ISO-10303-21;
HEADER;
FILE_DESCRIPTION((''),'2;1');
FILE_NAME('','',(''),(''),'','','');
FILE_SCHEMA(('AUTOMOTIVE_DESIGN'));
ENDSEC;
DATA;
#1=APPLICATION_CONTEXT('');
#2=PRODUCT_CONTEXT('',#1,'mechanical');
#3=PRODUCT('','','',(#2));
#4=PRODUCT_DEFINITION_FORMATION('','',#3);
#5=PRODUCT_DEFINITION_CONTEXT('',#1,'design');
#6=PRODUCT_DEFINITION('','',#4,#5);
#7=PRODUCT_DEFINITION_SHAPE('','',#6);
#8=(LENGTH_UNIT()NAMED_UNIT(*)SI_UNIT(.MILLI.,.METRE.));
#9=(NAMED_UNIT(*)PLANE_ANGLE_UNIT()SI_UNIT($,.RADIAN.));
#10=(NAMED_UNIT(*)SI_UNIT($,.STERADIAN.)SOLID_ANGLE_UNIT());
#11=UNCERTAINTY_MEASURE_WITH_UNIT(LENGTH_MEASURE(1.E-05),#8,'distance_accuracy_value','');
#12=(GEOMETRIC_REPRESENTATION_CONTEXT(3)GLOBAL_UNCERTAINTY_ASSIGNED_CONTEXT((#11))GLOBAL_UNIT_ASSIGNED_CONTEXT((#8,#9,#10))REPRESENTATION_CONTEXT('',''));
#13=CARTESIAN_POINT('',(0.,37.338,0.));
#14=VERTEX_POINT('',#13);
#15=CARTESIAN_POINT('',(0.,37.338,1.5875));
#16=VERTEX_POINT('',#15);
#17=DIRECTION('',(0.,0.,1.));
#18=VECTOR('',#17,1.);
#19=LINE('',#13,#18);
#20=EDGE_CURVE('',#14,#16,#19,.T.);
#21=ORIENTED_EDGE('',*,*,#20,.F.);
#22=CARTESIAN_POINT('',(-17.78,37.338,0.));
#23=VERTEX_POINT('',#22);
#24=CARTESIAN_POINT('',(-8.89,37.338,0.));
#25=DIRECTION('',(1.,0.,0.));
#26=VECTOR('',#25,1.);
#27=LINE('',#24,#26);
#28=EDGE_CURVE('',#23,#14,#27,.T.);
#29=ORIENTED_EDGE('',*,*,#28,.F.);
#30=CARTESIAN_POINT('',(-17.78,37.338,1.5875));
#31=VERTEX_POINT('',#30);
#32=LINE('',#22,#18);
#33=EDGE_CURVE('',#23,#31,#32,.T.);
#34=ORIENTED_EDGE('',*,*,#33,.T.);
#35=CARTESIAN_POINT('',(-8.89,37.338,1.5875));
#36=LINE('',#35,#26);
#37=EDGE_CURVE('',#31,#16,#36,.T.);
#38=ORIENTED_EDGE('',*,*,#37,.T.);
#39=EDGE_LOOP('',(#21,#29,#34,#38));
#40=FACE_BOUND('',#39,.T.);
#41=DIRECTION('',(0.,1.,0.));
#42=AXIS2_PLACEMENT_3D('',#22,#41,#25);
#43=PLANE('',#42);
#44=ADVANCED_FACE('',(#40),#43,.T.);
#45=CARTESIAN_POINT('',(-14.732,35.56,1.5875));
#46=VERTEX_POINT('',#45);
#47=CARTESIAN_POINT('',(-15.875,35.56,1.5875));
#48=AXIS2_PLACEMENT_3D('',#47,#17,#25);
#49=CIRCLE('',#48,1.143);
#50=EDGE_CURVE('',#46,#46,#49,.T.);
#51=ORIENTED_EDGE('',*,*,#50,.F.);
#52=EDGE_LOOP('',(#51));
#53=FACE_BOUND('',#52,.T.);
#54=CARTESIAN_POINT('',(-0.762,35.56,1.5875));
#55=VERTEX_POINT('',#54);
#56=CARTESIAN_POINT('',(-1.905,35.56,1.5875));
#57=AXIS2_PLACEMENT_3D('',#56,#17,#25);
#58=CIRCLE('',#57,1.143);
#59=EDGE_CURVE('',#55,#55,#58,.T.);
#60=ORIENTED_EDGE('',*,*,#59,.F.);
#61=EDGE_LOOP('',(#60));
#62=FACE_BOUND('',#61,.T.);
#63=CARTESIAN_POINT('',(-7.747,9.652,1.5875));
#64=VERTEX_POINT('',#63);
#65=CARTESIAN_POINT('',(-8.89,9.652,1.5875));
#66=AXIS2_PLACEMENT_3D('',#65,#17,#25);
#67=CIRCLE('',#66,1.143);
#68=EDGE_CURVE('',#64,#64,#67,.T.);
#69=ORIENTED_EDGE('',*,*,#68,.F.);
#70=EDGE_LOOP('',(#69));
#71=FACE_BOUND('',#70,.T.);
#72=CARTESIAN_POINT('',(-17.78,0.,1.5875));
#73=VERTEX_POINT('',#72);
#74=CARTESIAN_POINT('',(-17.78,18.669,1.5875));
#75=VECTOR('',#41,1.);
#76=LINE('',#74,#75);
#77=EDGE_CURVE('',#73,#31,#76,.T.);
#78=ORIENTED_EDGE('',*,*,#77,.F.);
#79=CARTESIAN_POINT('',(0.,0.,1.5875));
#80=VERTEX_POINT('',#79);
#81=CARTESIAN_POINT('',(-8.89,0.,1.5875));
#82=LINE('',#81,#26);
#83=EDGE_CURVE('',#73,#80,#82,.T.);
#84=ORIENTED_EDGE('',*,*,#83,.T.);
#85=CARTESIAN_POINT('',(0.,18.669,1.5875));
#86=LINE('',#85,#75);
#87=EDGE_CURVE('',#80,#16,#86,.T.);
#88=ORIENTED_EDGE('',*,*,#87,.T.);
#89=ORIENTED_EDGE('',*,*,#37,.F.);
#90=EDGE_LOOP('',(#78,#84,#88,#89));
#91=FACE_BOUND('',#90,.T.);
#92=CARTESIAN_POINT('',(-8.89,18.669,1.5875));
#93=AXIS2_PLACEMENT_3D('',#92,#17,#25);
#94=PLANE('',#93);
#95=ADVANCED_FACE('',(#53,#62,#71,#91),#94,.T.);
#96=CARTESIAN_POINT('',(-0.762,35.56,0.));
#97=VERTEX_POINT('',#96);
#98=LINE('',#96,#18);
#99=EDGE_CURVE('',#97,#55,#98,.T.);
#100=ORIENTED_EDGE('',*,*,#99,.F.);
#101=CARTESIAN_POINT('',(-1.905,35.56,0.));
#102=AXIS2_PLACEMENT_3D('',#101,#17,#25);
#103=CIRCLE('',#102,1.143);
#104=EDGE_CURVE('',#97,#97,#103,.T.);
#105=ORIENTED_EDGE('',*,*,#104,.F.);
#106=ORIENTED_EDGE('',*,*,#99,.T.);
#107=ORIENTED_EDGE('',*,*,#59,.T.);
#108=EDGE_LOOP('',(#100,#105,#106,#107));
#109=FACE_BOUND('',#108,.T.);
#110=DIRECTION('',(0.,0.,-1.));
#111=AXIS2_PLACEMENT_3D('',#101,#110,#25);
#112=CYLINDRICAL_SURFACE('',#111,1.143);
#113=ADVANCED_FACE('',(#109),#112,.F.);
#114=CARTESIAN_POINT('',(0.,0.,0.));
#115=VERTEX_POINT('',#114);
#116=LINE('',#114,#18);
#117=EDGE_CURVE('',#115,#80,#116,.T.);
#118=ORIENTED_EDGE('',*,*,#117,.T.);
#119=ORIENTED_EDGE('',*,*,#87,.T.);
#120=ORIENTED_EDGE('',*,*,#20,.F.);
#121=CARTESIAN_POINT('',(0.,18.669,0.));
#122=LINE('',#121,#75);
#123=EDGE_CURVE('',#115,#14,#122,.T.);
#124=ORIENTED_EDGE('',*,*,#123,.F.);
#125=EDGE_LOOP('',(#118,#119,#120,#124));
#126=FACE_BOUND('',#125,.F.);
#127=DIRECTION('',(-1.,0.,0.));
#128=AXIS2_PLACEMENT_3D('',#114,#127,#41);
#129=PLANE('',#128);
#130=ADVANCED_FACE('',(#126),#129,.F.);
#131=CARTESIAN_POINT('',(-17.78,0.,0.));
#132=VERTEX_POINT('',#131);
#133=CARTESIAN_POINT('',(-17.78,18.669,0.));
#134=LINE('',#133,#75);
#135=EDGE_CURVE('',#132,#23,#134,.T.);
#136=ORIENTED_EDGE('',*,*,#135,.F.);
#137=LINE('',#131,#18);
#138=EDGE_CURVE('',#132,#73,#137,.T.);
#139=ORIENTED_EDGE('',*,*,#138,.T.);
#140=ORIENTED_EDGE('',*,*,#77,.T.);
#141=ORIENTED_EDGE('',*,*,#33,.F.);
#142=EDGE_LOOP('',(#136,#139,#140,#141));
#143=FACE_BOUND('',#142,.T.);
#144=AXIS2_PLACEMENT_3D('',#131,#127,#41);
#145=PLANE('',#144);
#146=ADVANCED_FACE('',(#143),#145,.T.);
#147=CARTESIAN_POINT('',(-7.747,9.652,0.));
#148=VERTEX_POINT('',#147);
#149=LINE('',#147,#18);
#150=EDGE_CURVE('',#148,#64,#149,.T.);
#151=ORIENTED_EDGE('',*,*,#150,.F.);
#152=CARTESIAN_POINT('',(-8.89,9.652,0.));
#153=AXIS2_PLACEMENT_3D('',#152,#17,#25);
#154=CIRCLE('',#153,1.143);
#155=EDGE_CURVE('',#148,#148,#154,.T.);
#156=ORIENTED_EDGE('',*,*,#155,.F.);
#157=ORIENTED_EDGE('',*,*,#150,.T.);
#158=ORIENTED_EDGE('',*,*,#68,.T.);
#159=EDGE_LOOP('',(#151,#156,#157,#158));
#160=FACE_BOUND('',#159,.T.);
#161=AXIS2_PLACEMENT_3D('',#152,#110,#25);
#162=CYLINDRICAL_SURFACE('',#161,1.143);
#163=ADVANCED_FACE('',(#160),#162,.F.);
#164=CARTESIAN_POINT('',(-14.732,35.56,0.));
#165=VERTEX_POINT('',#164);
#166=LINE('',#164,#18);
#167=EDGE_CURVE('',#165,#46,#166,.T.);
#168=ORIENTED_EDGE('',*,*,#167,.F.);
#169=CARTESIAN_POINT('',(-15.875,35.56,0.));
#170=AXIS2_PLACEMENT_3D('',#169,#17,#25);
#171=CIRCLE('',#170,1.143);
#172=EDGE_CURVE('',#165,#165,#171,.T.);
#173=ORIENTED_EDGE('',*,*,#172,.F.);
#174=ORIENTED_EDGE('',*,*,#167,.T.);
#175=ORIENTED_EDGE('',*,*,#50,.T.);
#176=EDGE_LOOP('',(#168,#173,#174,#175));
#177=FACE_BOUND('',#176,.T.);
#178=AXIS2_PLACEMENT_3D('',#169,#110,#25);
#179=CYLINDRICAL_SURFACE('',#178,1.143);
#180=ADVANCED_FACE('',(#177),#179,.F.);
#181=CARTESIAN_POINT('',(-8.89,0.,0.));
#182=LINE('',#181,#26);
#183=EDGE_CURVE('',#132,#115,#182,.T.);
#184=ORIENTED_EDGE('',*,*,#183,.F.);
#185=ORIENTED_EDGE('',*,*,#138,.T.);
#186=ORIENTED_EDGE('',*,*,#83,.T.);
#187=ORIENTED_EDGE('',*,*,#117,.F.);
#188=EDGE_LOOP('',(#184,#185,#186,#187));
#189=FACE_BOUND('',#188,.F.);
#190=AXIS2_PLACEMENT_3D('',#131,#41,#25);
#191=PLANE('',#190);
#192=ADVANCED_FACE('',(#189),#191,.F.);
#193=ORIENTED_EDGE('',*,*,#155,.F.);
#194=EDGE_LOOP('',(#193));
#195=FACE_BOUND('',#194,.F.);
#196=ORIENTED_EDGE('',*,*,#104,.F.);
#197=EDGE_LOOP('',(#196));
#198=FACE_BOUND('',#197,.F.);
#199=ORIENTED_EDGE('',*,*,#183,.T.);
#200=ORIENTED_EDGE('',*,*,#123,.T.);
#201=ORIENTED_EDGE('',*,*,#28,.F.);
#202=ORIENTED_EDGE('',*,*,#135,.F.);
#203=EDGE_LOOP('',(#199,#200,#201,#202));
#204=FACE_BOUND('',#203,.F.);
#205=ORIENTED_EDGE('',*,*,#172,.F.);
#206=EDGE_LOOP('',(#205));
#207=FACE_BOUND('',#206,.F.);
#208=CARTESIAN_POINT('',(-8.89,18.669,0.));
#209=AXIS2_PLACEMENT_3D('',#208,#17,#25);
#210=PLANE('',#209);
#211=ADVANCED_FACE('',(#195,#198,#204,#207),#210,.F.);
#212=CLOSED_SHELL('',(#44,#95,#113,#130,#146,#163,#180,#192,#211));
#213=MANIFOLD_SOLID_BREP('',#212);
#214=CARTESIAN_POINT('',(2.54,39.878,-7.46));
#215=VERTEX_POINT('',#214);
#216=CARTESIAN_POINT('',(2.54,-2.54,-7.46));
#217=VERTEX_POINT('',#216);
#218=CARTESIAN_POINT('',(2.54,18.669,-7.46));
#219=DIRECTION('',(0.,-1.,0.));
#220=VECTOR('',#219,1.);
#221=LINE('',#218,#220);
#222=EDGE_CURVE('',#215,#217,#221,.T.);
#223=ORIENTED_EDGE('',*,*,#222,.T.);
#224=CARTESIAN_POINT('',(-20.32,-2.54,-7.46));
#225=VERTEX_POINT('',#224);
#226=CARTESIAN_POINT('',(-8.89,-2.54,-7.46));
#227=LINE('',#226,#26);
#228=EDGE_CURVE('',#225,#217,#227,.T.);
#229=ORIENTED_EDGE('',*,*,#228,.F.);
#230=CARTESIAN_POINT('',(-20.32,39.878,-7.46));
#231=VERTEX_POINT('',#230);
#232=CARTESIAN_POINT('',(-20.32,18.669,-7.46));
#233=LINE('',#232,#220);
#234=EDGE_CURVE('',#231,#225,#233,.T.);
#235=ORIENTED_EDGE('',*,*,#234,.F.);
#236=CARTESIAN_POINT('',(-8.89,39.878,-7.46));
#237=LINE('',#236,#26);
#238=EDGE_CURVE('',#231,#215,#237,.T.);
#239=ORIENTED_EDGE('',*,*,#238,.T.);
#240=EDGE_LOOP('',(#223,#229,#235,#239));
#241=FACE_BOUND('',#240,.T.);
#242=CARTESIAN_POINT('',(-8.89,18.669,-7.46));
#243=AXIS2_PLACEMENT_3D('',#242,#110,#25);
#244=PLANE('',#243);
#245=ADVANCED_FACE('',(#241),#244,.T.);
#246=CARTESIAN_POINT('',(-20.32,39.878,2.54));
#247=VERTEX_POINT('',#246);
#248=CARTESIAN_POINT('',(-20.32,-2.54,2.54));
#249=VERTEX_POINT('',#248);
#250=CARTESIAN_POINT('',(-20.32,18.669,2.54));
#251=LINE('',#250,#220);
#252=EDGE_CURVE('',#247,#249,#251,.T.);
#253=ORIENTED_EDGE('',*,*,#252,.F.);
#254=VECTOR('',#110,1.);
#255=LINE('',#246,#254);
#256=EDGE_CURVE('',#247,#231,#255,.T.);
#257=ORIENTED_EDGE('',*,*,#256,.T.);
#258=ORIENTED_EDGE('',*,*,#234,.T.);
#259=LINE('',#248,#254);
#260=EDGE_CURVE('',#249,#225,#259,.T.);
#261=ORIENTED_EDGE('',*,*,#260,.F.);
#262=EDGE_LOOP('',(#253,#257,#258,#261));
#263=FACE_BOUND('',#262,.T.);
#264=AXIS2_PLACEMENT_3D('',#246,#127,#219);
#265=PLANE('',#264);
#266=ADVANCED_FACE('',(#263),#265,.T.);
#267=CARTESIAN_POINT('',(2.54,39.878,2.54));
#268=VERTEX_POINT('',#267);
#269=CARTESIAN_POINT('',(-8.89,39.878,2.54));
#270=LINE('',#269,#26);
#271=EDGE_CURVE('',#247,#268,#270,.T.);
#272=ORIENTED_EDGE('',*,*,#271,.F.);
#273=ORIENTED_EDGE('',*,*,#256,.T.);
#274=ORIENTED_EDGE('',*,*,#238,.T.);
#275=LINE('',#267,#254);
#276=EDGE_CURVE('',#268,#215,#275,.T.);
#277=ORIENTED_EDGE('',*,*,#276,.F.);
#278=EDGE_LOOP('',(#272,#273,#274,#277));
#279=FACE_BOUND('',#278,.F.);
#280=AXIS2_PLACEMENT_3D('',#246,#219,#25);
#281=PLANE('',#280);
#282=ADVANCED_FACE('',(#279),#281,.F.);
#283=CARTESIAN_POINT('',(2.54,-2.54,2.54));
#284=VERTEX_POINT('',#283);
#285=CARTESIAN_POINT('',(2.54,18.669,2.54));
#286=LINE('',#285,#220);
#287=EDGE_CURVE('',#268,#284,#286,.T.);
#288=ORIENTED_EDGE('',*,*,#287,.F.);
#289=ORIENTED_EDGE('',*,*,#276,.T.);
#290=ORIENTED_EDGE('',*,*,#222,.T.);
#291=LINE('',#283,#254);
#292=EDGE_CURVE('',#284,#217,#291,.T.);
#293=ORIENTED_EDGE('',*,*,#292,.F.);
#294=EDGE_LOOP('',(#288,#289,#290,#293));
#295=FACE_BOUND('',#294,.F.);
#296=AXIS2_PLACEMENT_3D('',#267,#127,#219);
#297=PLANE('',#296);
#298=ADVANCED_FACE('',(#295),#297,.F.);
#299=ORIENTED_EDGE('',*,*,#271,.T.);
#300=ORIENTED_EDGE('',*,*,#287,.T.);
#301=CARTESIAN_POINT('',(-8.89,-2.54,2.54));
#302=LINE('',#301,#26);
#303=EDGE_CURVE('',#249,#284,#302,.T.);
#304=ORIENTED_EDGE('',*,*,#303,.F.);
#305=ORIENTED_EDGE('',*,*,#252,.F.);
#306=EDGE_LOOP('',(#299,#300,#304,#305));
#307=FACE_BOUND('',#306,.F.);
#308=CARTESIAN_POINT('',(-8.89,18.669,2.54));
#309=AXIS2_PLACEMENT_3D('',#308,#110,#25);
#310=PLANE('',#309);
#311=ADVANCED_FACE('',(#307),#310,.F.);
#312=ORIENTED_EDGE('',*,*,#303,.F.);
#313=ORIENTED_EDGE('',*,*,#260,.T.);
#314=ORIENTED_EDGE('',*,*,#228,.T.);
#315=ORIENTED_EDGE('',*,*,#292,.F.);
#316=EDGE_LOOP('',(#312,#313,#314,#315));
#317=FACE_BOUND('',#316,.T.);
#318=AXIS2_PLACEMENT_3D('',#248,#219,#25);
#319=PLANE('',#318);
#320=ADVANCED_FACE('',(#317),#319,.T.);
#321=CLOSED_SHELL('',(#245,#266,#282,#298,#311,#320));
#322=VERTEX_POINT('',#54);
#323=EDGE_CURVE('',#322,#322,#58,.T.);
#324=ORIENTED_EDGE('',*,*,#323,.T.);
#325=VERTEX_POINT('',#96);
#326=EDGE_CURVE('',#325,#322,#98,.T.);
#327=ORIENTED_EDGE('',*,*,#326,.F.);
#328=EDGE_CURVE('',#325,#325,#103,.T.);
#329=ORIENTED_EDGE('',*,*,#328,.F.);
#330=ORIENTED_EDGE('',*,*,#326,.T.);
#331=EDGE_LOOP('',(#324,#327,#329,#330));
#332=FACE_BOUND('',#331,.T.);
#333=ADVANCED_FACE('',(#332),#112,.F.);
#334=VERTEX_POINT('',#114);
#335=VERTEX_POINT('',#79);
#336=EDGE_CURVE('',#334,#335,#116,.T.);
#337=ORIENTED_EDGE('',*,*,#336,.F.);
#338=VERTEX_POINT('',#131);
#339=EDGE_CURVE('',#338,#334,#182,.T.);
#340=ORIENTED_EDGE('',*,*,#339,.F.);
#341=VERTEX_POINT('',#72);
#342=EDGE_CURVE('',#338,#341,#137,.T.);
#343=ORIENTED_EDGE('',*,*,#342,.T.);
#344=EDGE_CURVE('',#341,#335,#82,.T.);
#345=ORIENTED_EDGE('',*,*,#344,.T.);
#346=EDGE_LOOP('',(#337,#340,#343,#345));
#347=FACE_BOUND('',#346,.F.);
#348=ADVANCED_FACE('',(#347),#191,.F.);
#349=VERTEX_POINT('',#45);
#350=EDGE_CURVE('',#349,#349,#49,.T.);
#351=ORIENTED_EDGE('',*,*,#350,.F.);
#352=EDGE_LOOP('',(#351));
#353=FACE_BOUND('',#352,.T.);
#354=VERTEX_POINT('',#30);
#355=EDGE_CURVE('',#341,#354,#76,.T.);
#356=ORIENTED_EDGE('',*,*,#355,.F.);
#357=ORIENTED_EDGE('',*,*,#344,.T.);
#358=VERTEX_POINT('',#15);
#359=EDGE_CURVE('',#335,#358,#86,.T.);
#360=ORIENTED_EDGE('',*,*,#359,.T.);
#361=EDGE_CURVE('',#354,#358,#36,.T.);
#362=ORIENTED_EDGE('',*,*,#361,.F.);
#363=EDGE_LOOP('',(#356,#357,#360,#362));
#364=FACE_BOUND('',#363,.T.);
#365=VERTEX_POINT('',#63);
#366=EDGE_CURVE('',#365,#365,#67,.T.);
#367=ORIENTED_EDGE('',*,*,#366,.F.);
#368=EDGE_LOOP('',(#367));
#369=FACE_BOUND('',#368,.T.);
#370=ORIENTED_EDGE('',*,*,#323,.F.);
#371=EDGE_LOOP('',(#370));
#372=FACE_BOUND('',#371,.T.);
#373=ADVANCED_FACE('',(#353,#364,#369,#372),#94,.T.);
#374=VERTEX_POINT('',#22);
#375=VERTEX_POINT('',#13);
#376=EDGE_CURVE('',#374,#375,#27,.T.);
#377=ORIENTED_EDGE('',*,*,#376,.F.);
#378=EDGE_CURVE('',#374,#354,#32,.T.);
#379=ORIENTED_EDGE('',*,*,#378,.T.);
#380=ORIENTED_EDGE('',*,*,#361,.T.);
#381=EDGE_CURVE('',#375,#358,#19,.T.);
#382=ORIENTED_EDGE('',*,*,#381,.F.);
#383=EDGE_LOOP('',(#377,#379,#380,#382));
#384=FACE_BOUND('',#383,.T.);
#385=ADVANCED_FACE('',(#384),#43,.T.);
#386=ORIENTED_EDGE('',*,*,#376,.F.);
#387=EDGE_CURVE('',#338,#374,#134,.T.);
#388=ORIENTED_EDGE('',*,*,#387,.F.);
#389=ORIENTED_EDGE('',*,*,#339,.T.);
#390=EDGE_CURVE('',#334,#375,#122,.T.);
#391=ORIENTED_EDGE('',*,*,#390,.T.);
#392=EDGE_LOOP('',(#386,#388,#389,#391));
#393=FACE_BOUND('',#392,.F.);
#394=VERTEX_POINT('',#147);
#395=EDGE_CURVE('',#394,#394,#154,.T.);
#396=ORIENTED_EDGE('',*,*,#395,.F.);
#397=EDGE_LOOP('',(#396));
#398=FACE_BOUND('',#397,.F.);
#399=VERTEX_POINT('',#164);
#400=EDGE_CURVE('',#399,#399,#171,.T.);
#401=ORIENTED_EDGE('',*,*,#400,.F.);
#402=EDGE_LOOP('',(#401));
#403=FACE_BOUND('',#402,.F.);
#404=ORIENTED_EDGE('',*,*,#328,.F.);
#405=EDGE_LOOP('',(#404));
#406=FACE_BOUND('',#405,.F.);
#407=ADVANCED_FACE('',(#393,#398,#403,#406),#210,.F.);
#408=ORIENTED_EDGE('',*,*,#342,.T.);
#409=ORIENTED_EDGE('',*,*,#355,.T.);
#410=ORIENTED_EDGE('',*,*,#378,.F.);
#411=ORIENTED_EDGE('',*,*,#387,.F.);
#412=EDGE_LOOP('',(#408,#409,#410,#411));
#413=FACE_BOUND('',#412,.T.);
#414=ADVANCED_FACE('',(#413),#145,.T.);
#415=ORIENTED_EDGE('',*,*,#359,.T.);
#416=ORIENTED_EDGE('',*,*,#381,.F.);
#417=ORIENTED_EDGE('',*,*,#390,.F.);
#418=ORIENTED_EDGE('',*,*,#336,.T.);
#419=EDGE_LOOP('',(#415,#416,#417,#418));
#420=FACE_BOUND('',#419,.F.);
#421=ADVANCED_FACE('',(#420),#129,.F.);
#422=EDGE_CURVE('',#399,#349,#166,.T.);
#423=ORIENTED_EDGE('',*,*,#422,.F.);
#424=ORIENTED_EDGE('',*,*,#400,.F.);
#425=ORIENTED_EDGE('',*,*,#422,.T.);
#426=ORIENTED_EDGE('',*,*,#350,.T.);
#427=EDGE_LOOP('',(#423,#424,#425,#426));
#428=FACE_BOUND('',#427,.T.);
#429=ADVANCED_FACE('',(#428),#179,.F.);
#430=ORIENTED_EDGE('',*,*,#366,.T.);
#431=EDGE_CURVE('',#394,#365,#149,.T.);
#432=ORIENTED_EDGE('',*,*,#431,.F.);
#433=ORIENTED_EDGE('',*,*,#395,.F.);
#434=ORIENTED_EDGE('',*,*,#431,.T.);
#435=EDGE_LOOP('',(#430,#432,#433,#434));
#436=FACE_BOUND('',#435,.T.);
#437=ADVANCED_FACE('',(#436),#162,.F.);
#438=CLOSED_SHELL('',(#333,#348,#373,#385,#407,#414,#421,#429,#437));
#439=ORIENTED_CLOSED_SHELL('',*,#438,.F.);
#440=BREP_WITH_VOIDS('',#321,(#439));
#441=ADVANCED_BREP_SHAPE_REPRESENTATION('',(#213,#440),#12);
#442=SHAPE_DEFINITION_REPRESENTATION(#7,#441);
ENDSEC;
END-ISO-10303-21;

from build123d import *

# Parameters (mm, degrees)
F0_W     = 17.78
F0_H     = 37.338
F0_R     = 1.143
F1_DEPTH = 1.5875
F3_W     = 22.86
F3_H     = 42.418
F3_W_2   = 17.78
F3_H_2   = 37.338
F4_DEPTH = 10


# Not quite as in the source:
# - a feature names something its author has since deleted; it is built from what else it names


with BuildPart() as f1:
    # F0 (on Top) → F1 (new body)
    with BuildSketch(Plane.XY):
        with Locations((-8.89, 18.669)):
            Rectangle(F0_W, F0_H)
        with Locations((-8.89, 9.652)):
            Circle(F0_R, mode=Mode.SUBTRACT)
        with Locations((-15.875, 35.56)):
            Circle(F0_R, mode=Mode.SUBTRACT)
        with Locations((-1.905, 35.56)):
            Circle(F0_R, mode=Mode.SUBTRACT)
    extrude(amount=F1_DEPTH)


with BuildPart() as f4:
    # F3 (on offset) → F4 (new body)
    with BuildSketch(Plane(origin=(0, 0, 2.54), x_dir=(1, 0, 0), z_dir=(0, 0, -1))):
        with Locations((-8.89, -18.669)):
            Rectangle(F3_W, F3_H)
        with Locations((-8.89, -18.669)):
            Rectangle(F3_W_2, F3_H_2, mode=Mode.SUBTRACT)
        with Locations((-8.89, -18.669)):
            Rectangle(F3_W_2, F3_H_2)
    extrude(amount=F4_DEPTH)

    # F5: cut F1
    add(f1.part, mode=Mode.SUBTRACT)


solid = Compound([f1.part, f4.part])
